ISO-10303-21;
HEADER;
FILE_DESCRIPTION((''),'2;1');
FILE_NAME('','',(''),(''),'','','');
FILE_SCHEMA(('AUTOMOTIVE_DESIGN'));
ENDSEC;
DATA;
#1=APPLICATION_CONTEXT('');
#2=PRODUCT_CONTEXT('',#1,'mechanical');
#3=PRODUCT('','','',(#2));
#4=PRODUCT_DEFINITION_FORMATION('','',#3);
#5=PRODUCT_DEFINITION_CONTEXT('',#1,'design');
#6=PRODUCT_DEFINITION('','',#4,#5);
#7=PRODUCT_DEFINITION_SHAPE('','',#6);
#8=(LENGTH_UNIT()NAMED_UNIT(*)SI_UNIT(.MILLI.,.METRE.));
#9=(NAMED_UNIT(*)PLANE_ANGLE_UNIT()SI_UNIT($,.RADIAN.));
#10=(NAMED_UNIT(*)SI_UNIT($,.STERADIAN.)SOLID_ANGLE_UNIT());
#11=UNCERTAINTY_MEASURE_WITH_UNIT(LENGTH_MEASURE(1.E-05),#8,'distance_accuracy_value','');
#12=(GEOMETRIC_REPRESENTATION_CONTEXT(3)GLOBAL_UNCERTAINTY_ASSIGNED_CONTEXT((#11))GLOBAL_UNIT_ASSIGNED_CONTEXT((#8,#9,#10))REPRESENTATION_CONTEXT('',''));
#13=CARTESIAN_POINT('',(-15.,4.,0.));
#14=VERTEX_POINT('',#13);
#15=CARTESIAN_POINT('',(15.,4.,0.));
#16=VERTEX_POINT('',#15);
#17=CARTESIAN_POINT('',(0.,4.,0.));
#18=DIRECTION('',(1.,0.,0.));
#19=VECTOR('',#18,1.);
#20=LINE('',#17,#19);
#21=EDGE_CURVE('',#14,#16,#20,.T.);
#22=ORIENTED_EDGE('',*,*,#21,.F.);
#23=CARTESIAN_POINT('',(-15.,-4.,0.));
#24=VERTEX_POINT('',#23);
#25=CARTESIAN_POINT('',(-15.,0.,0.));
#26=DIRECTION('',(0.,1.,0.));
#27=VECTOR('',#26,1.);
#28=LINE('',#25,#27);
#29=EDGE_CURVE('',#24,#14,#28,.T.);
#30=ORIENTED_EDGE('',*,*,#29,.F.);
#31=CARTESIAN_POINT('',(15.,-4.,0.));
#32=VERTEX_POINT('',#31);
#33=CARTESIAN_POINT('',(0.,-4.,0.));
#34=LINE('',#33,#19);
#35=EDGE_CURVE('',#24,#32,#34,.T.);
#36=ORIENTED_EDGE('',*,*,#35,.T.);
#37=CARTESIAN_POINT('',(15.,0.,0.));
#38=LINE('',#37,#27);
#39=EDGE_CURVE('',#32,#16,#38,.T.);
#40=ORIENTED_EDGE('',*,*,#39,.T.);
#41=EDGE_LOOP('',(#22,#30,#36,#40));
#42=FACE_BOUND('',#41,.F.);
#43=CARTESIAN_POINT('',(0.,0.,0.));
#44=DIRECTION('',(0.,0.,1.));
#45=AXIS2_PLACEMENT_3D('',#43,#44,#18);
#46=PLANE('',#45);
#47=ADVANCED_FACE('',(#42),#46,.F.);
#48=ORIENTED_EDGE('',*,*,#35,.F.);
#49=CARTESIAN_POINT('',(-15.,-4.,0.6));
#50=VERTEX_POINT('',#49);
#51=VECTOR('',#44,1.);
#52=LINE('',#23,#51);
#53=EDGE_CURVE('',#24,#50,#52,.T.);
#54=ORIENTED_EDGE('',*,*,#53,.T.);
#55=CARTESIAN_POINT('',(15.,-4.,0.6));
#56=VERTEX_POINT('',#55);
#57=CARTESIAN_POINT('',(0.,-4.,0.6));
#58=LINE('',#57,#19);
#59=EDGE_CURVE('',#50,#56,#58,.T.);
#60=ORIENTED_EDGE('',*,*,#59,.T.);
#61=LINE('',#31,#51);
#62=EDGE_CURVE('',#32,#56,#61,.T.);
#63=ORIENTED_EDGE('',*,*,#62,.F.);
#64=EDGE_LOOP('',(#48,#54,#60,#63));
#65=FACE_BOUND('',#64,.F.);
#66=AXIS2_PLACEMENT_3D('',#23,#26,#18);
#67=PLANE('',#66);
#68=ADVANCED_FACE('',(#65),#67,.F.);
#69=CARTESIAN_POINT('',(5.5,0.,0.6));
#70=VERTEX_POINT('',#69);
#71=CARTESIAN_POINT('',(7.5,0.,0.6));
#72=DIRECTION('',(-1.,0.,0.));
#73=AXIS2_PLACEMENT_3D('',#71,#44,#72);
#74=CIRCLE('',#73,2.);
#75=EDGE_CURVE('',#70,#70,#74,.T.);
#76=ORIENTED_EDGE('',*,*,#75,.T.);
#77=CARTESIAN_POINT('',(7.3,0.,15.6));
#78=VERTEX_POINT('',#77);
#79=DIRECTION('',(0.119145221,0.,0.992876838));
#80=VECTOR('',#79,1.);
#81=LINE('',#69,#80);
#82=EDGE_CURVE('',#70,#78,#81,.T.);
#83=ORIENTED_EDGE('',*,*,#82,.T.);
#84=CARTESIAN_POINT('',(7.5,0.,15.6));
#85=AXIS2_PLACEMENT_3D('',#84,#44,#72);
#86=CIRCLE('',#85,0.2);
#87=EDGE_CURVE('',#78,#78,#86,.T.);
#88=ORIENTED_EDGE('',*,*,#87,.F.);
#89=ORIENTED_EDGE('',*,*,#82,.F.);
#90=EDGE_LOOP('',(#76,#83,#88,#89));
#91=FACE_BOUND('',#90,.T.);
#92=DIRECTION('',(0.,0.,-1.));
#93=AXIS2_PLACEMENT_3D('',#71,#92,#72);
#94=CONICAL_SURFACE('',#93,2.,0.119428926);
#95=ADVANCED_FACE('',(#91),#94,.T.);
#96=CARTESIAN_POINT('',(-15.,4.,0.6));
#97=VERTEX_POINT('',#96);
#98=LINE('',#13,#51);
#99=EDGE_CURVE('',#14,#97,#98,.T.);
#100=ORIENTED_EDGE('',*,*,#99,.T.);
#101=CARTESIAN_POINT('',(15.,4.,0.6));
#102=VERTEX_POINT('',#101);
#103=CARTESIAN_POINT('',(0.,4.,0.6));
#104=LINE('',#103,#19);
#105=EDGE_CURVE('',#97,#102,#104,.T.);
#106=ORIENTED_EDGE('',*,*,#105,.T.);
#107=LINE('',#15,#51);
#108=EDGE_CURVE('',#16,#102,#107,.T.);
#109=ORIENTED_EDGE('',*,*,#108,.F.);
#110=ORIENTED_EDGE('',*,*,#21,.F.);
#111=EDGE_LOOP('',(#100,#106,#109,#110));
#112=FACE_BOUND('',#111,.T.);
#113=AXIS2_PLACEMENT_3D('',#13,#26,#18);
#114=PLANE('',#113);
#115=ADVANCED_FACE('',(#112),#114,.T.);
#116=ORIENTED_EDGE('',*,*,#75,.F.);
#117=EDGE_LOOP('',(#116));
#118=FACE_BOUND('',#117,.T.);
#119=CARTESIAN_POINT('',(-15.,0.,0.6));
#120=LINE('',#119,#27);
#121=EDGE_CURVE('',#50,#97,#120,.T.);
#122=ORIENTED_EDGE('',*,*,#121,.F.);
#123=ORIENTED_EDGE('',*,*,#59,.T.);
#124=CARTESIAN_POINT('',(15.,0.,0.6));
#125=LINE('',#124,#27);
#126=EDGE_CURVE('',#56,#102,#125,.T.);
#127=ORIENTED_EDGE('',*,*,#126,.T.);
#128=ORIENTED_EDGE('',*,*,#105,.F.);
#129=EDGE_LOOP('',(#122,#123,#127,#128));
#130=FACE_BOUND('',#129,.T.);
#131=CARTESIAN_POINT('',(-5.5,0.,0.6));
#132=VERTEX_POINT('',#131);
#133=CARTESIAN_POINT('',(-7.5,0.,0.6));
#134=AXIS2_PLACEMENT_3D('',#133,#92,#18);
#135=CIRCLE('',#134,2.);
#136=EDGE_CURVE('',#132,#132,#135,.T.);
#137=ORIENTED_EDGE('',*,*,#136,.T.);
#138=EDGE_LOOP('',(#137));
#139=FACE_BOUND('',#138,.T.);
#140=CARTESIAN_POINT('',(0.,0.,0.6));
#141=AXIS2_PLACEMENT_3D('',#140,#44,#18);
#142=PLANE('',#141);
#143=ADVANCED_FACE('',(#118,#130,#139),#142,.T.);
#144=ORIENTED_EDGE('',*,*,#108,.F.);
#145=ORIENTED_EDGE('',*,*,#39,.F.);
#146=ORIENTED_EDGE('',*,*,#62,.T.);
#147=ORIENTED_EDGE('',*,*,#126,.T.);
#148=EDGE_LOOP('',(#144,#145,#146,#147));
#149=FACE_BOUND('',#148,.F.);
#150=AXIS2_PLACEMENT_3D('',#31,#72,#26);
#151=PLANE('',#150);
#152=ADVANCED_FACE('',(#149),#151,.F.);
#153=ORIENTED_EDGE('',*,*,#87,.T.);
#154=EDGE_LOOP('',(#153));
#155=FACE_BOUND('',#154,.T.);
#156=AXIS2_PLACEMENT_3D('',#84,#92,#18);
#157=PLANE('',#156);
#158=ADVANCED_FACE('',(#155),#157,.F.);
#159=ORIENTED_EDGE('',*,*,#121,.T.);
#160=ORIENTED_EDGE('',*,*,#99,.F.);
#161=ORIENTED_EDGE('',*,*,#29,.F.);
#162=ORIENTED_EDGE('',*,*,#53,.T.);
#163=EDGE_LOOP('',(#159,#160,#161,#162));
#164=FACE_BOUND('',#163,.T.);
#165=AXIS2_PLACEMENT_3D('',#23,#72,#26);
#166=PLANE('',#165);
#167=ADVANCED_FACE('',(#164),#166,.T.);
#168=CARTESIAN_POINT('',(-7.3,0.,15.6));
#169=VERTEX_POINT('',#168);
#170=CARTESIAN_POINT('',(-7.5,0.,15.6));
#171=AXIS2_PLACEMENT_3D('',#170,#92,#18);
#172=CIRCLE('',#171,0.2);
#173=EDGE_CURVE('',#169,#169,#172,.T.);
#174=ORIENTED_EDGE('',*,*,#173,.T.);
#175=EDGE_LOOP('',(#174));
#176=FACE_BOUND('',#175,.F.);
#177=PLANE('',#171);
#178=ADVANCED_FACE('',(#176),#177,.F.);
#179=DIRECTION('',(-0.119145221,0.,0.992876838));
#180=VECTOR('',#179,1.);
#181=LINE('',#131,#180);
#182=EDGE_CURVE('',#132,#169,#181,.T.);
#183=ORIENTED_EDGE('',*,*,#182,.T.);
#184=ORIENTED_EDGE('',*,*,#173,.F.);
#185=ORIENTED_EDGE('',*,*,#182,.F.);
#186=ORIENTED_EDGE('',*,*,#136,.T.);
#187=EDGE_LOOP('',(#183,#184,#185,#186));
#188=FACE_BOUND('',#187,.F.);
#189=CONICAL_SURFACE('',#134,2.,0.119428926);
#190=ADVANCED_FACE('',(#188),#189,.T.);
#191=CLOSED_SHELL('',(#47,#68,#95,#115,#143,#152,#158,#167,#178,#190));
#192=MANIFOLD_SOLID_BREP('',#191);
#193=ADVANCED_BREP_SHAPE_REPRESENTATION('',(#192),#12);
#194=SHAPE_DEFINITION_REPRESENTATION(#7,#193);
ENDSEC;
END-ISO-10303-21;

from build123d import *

# Parameters (mm, degrees)
F0_W     = 30
F0_H     = 8
F1_DEPTH = 0.6


# Not quite as in the source:
# - a pattern or mirror of a feature is missing from the dataset's text; its kind, count and spacing are read off the source's solid


with BuildPart() as f1:
    # F0 (on Top) → F1 (new body)
    with BuildSketch(Plane.XY):
        Rectangle(F0_W, F0_H)
    extrude(amount=F1_DEPTH)

    # F2 (on Front) → F3 (revolve)
    with BuildSketch(Plane.XZ):
        Polygon((-5.5, 0.6), (-7.3, 15.6), (-7.5, 15.6), (-7.5, 0.6), align=None)
    f3 = revolve(axis=Axis((-7.5, 0, 8.1), (0, 0, -1)))

    # F3_copies: F3 across plane
    add(f3.mirror(Plane(origin=(0, 0, 0), x_dir=(0, 0, 1), z_dir=(1, 0, 0))))


solid = f1.part
